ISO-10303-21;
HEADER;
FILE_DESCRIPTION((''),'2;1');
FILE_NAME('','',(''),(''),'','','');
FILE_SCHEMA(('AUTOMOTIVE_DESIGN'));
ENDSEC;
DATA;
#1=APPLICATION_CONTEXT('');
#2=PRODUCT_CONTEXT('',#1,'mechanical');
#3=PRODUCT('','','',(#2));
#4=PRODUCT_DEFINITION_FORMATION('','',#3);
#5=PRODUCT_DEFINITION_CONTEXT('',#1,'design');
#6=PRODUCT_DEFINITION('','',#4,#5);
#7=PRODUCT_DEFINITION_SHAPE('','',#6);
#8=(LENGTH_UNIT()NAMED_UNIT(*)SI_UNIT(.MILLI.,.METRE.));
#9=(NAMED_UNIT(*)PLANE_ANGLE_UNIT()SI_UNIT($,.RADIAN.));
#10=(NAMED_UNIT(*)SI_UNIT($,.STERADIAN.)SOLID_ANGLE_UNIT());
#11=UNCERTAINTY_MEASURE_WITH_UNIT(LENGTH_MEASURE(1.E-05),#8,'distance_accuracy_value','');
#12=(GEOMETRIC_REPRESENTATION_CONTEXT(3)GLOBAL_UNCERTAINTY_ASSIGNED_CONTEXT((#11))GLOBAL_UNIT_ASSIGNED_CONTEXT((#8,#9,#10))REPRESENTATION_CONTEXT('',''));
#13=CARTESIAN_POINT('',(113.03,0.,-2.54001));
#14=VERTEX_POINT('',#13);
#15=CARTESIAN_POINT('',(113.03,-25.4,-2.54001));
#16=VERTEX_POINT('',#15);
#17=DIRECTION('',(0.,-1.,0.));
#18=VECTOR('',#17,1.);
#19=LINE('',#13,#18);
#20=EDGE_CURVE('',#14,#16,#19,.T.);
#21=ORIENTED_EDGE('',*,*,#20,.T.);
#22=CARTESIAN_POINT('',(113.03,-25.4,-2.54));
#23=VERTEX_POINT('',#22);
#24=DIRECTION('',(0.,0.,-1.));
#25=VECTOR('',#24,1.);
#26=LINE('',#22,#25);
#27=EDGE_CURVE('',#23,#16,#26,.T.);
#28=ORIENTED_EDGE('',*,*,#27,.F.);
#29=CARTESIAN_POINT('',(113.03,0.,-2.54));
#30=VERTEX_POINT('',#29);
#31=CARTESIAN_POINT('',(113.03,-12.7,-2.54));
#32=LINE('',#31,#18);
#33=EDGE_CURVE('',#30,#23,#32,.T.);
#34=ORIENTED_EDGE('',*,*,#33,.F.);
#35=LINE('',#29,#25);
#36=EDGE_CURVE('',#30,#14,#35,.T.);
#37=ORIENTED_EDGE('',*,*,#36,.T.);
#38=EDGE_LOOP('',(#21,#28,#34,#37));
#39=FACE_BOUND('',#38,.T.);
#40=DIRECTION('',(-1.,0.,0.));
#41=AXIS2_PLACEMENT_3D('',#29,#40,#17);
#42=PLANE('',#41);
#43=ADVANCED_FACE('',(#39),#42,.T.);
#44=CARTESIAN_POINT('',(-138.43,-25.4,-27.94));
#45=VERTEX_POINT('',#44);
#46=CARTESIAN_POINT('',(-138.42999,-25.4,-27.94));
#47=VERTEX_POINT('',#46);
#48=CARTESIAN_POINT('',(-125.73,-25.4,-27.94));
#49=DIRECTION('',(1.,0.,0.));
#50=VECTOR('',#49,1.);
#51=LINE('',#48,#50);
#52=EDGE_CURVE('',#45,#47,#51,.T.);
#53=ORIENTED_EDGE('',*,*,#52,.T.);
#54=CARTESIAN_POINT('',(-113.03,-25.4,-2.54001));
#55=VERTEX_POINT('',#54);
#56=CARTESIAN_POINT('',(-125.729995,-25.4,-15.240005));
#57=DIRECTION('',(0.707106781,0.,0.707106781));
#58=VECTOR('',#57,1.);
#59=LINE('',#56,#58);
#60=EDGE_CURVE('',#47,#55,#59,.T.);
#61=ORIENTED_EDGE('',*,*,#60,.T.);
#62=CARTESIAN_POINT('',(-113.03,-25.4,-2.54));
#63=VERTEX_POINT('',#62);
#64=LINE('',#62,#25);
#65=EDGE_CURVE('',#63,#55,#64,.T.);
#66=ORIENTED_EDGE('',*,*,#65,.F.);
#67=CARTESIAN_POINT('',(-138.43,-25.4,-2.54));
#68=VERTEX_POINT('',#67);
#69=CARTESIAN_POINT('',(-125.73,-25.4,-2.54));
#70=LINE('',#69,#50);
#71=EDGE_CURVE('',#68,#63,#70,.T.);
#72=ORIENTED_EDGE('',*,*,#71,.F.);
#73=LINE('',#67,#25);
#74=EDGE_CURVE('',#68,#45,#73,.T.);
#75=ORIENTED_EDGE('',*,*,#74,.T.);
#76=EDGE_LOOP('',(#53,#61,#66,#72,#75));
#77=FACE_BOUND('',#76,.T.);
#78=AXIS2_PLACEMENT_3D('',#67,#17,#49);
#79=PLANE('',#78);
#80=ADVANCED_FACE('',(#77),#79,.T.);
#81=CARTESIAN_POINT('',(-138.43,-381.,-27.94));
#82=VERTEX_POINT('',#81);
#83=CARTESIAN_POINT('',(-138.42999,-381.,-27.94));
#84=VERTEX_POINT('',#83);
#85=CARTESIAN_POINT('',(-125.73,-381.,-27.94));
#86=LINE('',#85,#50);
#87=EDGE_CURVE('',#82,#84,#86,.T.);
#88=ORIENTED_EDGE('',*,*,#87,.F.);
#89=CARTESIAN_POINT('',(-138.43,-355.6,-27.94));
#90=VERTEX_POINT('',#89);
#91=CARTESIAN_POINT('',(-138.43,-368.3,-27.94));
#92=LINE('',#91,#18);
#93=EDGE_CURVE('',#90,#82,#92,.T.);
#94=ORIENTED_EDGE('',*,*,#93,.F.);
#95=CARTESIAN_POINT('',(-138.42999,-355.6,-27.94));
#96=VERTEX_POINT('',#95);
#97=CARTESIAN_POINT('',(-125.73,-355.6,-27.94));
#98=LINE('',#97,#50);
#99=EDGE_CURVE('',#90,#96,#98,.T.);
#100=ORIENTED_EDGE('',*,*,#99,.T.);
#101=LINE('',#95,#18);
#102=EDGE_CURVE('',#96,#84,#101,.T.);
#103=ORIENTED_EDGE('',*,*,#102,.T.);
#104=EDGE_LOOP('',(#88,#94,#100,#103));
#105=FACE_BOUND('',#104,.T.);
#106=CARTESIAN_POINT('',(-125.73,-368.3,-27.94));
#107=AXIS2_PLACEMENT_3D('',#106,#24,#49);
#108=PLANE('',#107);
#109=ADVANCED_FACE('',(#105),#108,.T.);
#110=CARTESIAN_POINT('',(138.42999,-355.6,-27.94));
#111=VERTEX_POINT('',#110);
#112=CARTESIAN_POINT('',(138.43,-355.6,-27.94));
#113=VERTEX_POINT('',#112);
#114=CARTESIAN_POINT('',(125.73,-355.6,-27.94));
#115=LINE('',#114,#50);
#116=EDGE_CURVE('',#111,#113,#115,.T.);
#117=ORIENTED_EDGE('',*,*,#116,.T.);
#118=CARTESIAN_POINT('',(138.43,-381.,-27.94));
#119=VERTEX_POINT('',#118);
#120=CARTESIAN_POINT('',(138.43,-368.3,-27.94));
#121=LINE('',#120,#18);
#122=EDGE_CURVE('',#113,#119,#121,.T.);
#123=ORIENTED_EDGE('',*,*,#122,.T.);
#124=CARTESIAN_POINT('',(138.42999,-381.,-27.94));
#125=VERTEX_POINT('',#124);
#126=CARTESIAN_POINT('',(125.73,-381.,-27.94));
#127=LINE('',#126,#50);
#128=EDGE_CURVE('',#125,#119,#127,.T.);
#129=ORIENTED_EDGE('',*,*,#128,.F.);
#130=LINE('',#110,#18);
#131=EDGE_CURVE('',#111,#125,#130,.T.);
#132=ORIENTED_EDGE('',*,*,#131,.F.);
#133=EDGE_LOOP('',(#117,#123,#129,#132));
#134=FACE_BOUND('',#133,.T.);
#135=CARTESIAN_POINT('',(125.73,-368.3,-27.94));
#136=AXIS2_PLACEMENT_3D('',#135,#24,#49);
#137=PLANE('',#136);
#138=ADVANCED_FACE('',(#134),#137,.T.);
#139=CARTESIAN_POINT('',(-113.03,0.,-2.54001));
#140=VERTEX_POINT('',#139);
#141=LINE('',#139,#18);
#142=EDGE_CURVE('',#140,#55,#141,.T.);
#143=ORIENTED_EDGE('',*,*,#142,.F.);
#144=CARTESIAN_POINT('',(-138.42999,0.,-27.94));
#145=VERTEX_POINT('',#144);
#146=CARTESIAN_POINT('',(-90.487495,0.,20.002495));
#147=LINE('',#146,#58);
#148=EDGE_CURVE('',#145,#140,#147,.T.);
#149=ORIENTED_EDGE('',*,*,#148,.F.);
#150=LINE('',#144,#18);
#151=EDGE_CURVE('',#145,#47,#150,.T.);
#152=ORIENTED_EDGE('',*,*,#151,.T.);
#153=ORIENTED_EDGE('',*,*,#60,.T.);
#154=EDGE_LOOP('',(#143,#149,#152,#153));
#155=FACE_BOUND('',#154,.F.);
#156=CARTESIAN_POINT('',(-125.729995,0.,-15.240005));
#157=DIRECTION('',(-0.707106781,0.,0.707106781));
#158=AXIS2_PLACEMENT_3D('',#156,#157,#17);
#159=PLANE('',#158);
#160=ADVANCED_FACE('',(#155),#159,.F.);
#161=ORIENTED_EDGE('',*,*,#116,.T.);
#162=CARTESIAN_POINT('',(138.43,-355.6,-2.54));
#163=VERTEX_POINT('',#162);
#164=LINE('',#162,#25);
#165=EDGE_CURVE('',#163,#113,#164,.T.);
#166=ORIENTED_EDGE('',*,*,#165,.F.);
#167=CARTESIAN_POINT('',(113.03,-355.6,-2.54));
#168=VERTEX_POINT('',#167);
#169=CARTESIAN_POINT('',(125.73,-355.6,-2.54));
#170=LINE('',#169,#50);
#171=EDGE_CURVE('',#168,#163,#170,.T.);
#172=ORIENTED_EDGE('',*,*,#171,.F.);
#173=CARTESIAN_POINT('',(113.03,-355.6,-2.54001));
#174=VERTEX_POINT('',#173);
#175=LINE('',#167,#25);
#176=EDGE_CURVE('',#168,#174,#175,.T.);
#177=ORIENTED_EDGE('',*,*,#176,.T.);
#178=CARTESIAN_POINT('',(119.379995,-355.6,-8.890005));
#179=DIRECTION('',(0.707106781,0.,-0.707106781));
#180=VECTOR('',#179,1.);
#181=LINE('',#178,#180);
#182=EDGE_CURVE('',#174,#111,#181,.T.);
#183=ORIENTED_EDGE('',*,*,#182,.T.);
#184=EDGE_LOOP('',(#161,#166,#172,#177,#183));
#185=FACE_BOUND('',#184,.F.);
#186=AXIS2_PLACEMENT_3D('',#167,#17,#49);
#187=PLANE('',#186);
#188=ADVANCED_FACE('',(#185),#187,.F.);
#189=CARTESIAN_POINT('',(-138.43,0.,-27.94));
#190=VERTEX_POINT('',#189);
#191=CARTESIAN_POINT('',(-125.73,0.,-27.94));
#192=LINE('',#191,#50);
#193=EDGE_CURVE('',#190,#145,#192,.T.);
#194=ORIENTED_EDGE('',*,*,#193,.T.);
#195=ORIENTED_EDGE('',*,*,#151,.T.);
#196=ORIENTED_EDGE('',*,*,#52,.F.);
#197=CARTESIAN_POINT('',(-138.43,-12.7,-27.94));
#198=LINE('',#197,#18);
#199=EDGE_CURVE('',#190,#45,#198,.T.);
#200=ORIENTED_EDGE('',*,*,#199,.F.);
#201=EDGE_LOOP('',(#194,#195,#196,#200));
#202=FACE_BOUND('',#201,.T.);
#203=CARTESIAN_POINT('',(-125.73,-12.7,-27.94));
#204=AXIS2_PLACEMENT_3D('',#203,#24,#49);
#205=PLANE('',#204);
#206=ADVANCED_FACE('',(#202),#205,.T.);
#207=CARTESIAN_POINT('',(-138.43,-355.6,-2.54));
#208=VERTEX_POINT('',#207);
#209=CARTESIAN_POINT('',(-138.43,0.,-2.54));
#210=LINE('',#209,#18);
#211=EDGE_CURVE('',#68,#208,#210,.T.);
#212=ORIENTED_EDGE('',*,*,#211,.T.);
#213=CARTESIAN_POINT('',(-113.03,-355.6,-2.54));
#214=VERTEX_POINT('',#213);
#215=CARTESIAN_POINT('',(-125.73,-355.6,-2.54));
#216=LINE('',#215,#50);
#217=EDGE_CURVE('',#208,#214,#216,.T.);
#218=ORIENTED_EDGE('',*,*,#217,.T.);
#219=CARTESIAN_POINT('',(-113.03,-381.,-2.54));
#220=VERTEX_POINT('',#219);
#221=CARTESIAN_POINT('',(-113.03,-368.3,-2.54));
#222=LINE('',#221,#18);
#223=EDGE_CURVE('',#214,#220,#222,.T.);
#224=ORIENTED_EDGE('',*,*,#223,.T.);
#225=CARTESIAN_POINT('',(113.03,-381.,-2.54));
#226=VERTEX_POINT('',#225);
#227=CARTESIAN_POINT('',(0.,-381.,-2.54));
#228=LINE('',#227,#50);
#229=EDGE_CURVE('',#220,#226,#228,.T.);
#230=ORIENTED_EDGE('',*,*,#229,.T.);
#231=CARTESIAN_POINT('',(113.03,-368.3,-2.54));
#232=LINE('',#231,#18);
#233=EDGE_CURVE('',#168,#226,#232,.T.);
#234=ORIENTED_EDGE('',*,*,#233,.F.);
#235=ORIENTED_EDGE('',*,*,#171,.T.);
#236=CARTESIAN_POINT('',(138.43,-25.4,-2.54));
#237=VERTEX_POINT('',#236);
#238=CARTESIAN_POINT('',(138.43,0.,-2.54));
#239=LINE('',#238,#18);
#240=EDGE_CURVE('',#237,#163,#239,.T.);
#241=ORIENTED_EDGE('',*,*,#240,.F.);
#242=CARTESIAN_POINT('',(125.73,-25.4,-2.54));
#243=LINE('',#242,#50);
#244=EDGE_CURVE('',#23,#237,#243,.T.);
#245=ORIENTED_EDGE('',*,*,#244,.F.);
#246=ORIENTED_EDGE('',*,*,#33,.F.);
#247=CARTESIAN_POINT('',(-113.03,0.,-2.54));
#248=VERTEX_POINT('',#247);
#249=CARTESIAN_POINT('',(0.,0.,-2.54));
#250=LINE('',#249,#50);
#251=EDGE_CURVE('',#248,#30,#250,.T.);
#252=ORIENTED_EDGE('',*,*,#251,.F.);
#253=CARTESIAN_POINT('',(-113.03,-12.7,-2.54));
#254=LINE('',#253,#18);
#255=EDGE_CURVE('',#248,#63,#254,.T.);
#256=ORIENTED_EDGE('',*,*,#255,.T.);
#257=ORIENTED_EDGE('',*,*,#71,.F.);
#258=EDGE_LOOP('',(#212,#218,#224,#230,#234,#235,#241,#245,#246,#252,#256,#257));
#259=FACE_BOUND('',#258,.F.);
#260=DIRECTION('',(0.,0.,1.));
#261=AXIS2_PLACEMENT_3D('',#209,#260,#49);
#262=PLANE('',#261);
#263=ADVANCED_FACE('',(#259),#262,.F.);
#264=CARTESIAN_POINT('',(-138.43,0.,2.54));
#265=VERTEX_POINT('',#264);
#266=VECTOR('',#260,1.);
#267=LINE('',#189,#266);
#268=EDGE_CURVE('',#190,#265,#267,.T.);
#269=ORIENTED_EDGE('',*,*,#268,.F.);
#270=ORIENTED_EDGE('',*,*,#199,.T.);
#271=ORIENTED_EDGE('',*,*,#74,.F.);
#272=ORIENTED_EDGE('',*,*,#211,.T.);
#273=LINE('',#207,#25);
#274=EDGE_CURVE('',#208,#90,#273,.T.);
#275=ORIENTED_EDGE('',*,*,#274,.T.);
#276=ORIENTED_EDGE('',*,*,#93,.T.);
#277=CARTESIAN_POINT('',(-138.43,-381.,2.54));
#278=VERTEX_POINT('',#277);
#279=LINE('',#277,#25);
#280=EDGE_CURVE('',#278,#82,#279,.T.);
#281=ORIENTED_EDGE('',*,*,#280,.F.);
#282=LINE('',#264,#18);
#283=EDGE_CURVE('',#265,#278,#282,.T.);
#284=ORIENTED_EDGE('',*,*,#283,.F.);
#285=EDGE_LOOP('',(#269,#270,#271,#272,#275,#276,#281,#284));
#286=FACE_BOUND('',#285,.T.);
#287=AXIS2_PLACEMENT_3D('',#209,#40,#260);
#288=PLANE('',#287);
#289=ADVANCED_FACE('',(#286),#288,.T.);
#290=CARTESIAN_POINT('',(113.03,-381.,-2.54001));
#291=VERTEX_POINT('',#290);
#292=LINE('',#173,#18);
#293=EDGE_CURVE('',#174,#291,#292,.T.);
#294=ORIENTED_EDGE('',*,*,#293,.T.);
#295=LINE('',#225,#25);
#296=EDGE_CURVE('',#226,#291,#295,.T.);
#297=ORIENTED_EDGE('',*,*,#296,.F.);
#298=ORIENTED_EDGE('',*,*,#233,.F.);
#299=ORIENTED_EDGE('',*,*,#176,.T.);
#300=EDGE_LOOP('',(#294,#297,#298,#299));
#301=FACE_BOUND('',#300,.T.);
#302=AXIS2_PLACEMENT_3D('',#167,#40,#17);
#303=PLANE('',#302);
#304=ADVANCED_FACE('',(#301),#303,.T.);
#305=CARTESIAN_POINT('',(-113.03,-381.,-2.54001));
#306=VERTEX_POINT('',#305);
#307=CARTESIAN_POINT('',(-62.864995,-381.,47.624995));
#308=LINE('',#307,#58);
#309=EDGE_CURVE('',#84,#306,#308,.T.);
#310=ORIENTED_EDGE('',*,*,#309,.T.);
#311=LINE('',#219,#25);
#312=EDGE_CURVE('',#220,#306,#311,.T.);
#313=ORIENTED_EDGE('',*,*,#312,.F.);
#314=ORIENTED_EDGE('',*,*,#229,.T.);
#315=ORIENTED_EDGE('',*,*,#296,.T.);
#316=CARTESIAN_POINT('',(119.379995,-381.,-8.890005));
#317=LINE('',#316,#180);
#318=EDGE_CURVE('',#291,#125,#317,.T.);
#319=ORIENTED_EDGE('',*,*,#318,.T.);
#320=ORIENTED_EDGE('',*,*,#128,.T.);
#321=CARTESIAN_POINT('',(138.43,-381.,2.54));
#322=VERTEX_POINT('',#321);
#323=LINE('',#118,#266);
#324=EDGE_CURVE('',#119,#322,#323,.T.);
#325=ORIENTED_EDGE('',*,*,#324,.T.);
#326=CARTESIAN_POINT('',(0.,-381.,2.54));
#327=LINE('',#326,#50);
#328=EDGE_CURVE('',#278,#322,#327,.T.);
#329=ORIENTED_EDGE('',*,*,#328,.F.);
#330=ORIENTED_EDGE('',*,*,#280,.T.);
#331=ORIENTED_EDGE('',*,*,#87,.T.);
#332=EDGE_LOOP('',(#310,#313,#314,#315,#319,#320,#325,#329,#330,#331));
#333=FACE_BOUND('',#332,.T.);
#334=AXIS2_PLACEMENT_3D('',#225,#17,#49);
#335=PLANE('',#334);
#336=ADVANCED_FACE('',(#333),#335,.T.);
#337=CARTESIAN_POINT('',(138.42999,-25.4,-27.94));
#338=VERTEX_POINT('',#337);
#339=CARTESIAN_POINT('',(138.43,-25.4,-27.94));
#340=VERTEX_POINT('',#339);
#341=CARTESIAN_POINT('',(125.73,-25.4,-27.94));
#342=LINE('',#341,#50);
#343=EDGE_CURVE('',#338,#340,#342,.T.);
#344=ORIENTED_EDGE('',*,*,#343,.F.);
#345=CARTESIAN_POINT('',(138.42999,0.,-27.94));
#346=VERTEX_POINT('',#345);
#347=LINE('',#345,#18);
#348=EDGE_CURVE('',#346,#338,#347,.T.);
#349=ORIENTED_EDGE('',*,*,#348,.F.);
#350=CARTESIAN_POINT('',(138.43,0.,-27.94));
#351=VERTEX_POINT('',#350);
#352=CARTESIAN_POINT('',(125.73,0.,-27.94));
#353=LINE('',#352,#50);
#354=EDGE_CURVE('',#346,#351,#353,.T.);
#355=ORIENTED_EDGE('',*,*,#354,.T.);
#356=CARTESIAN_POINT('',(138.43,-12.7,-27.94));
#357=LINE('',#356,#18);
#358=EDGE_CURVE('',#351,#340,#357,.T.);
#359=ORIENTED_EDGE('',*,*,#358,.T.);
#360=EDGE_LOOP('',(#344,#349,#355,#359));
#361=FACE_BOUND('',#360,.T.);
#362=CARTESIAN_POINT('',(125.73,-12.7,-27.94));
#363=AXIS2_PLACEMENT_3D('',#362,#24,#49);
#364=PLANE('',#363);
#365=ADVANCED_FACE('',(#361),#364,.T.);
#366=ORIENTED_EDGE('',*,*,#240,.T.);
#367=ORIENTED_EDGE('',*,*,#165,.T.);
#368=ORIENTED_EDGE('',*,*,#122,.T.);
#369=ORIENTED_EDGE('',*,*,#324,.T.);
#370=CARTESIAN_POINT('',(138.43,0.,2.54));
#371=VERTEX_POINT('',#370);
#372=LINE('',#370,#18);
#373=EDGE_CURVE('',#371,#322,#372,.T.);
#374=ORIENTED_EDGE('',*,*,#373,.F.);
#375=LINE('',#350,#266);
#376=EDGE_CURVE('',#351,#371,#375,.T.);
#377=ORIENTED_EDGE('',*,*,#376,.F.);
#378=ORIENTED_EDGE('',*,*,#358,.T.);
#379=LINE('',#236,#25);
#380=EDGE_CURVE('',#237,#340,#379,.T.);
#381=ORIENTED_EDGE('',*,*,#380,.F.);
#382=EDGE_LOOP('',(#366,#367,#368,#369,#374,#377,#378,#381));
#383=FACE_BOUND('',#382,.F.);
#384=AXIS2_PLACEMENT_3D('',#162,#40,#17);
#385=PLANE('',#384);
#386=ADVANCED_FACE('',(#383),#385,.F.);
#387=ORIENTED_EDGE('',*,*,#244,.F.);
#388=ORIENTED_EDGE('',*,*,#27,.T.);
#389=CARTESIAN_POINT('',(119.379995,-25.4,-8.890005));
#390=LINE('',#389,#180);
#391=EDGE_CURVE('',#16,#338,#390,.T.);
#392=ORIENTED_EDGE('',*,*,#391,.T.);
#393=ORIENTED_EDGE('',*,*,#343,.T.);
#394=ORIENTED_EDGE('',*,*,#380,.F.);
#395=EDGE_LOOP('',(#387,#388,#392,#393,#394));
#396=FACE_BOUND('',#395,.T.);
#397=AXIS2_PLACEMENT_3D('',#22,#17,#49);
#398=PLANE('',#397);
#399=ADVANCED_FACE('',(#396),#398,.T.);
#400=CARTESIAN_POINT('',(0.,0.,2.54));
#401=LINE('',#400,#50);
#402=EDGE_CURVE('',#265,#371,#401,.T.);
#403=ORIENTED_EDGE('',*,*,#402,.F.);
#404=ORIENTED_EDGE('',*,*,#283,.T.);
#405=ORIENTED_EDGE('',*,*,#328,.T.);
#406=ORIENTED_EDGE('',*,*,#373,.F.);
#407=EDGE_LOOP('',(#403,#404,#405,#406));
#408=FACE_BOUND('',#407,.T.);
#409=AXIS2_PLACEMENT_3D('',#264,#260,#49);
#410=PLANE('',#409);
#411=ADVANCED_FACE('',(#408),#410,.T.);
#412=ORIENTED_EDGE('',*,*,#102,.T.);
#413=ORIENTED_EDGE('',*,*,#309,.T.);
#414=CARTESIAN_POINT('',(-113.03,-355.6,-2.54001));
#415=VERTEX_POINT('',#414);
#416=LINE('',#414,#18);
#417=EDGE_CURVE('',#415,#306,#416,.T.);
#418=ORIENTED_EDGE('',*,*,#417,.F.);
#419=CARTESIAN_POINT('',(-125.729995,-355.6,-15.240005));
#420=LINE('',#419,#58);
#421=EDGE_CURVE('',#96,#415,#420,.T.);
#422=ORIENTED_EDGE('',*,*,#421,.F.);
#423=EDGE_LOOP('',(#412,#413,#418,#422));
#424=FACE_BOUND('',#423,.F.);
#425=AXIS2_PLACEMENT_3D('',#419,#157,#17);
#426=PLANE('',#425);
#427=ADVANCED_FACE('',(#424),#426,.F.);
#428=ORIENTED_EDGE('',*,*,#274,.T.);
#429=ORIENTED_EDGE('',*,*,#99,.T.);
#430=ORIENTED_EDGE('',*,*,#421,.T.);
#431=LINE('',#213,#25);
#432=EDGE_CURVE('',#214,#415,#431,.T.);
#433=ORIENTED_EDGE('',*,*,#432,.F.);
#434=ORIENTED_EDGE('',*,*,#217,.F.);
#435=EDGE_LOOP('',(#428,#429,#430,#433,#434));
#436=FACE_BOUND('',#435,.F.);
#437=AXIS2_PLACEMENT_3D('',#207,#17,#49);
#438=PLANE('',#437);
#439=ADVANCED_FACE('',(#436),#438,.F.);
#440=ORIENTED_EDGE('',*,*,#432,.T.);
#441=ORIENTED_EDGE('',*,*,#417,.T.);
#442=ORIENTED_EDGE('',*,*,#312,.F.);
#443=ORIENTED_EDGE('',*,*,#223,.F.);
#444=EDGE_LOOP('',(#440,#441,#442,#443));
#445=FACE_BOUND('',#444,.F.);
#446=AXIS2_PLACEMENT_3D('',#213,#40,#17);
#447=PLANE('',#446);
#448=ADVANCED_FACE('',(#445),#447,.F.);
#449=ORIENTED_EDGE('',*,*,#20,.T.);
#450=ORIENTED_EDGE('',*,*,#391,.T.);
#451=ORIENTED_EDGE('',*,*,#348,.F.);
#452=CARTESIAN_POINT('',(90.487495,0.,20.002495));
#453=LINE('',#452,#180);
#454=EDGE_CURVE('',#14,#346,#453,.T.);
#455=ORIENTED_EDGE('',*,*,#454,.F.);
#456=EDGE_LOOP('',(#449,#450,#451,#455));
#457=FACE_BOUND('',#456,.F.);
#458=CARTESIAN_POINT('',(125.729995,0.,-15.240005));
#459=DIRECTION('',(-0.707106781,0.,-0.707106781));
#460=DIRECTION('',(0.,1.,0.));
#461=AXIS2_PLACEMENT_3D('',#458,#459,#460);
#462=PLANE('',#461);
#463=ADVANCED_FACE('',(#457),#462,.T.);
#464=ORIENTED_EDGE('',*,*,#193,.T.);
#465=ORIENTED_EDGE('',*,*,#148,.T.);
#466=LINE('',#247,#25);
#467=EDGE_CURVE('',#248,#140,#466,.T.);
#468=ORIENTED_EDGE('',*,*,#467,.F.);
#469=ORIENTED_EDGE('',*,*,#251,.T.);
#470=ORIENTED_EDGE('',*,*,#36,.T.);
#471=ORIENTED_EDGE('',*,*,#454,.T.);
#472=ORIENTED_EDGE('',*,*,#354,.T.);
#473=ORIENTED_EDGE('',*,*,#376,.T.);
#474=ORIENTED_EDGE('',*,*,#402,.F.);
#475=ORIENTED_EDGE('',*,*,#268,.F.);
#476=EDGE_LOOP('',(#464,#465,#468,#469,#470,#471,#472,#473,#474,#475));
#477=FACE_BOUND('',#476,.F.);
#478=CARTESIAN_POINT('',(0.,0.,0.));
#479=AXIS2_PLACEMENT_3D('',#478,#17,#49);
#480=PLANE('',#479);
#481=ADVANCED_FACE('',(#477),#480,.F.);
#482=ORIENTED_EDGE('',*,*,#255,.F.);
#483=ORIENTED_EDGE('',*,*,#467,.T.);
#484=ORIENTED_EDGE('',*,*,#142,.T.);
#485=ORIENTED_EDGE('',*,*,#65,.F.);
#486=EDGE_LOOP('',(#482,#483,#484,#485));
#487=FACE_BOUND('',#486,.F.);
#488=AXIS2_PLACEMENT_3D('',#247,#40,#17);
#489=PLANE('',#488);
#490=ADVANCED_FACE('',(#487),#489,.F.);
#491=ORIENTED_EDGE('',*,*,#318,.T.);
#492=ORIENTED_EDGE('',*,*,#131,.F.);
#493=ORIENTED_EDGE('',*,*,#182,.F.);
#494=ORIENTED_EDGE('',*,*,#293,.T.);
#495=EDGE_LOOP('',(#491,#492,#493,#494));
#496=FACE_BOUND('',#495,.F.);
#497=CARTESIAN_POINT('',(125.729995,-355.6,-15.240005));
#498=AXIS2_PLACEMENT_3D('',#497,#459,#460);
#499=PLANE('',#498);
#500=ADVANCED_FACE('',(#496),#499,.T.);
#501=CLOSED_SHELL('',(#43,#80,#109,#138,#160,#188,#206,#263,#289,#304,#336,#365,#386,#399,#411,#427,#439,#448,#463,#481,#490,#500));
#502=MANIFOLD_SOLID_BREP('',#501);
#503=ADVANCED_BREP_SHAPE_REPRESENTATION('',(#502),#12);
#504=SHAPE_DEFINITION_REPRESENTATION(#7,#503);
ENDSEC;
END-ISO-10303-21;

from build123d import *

# Parameters (mm, degrees)
F0_W     = 276.86
F0_H     = 5.08
F1_DEPTH = 381
F2_W     = 25.4
F2_H     = 25.4
F3_DEPTH = 25.4
F4_SIZE  = 25.39999
F5_SIZE  = 25.39999


# Not quite as in the source:
# - a fillet or chamfer is up to 0.001 mm smaller than in the source, because OpenCascade refuses the exact size


with BuildPart() as f1:
    # F0 (on Front) → F1 (new body)
    with BuildSketch(Plane.XZ):
        Rectangle(F0_W, F0_H)
    extrude(amount=F1_DEPTH)

    # F2 (on face) → F3 (join)
    with BuildSketch(Plane(origin=(0, 0, -2.54), x_dir=(1, 0, 0), z_dir=(0, 0, -1))):
        with Locations((125.73, 368.3)):
            Rectangle(F2_W, F2_H)
        with Locations((-125.73, 368.3)):
            Rectangle(F2_W, F2_H)
        with Locations((-125.73, 12.7)):
            Rectangle(F2_W, F2_H)
        with Locations((125.73, 12.7)):
            Rectangle(F2_W, F2_H)
    extrude(amount=F3_DEPTH)

    # F4 (size 25.4 in the source; OpenCascade refuses exactly that, so slightly less here)
    f4_edges = [f1.edges().sort_by_distance(p)[0] for p in [
        (-113.03, -368.3, -27.94),
    ]]
    chamfer(f4_edges, length=F4_SIZE)

    # F5 (size 25.4 in the source; OpenCascade refuses exactly that, so slightly less here)
    f5_edges = [f1.edges().sort_by_distance(p)[0] for p in [
        (113.03, -368.3, -27.94),
        (113.03, -12.7, -27.94),
        (-113.03, -12.7, -27.94),
    ]]
    chamfer(f5_edges, length=F5_SIZE)


solid = f1.part
